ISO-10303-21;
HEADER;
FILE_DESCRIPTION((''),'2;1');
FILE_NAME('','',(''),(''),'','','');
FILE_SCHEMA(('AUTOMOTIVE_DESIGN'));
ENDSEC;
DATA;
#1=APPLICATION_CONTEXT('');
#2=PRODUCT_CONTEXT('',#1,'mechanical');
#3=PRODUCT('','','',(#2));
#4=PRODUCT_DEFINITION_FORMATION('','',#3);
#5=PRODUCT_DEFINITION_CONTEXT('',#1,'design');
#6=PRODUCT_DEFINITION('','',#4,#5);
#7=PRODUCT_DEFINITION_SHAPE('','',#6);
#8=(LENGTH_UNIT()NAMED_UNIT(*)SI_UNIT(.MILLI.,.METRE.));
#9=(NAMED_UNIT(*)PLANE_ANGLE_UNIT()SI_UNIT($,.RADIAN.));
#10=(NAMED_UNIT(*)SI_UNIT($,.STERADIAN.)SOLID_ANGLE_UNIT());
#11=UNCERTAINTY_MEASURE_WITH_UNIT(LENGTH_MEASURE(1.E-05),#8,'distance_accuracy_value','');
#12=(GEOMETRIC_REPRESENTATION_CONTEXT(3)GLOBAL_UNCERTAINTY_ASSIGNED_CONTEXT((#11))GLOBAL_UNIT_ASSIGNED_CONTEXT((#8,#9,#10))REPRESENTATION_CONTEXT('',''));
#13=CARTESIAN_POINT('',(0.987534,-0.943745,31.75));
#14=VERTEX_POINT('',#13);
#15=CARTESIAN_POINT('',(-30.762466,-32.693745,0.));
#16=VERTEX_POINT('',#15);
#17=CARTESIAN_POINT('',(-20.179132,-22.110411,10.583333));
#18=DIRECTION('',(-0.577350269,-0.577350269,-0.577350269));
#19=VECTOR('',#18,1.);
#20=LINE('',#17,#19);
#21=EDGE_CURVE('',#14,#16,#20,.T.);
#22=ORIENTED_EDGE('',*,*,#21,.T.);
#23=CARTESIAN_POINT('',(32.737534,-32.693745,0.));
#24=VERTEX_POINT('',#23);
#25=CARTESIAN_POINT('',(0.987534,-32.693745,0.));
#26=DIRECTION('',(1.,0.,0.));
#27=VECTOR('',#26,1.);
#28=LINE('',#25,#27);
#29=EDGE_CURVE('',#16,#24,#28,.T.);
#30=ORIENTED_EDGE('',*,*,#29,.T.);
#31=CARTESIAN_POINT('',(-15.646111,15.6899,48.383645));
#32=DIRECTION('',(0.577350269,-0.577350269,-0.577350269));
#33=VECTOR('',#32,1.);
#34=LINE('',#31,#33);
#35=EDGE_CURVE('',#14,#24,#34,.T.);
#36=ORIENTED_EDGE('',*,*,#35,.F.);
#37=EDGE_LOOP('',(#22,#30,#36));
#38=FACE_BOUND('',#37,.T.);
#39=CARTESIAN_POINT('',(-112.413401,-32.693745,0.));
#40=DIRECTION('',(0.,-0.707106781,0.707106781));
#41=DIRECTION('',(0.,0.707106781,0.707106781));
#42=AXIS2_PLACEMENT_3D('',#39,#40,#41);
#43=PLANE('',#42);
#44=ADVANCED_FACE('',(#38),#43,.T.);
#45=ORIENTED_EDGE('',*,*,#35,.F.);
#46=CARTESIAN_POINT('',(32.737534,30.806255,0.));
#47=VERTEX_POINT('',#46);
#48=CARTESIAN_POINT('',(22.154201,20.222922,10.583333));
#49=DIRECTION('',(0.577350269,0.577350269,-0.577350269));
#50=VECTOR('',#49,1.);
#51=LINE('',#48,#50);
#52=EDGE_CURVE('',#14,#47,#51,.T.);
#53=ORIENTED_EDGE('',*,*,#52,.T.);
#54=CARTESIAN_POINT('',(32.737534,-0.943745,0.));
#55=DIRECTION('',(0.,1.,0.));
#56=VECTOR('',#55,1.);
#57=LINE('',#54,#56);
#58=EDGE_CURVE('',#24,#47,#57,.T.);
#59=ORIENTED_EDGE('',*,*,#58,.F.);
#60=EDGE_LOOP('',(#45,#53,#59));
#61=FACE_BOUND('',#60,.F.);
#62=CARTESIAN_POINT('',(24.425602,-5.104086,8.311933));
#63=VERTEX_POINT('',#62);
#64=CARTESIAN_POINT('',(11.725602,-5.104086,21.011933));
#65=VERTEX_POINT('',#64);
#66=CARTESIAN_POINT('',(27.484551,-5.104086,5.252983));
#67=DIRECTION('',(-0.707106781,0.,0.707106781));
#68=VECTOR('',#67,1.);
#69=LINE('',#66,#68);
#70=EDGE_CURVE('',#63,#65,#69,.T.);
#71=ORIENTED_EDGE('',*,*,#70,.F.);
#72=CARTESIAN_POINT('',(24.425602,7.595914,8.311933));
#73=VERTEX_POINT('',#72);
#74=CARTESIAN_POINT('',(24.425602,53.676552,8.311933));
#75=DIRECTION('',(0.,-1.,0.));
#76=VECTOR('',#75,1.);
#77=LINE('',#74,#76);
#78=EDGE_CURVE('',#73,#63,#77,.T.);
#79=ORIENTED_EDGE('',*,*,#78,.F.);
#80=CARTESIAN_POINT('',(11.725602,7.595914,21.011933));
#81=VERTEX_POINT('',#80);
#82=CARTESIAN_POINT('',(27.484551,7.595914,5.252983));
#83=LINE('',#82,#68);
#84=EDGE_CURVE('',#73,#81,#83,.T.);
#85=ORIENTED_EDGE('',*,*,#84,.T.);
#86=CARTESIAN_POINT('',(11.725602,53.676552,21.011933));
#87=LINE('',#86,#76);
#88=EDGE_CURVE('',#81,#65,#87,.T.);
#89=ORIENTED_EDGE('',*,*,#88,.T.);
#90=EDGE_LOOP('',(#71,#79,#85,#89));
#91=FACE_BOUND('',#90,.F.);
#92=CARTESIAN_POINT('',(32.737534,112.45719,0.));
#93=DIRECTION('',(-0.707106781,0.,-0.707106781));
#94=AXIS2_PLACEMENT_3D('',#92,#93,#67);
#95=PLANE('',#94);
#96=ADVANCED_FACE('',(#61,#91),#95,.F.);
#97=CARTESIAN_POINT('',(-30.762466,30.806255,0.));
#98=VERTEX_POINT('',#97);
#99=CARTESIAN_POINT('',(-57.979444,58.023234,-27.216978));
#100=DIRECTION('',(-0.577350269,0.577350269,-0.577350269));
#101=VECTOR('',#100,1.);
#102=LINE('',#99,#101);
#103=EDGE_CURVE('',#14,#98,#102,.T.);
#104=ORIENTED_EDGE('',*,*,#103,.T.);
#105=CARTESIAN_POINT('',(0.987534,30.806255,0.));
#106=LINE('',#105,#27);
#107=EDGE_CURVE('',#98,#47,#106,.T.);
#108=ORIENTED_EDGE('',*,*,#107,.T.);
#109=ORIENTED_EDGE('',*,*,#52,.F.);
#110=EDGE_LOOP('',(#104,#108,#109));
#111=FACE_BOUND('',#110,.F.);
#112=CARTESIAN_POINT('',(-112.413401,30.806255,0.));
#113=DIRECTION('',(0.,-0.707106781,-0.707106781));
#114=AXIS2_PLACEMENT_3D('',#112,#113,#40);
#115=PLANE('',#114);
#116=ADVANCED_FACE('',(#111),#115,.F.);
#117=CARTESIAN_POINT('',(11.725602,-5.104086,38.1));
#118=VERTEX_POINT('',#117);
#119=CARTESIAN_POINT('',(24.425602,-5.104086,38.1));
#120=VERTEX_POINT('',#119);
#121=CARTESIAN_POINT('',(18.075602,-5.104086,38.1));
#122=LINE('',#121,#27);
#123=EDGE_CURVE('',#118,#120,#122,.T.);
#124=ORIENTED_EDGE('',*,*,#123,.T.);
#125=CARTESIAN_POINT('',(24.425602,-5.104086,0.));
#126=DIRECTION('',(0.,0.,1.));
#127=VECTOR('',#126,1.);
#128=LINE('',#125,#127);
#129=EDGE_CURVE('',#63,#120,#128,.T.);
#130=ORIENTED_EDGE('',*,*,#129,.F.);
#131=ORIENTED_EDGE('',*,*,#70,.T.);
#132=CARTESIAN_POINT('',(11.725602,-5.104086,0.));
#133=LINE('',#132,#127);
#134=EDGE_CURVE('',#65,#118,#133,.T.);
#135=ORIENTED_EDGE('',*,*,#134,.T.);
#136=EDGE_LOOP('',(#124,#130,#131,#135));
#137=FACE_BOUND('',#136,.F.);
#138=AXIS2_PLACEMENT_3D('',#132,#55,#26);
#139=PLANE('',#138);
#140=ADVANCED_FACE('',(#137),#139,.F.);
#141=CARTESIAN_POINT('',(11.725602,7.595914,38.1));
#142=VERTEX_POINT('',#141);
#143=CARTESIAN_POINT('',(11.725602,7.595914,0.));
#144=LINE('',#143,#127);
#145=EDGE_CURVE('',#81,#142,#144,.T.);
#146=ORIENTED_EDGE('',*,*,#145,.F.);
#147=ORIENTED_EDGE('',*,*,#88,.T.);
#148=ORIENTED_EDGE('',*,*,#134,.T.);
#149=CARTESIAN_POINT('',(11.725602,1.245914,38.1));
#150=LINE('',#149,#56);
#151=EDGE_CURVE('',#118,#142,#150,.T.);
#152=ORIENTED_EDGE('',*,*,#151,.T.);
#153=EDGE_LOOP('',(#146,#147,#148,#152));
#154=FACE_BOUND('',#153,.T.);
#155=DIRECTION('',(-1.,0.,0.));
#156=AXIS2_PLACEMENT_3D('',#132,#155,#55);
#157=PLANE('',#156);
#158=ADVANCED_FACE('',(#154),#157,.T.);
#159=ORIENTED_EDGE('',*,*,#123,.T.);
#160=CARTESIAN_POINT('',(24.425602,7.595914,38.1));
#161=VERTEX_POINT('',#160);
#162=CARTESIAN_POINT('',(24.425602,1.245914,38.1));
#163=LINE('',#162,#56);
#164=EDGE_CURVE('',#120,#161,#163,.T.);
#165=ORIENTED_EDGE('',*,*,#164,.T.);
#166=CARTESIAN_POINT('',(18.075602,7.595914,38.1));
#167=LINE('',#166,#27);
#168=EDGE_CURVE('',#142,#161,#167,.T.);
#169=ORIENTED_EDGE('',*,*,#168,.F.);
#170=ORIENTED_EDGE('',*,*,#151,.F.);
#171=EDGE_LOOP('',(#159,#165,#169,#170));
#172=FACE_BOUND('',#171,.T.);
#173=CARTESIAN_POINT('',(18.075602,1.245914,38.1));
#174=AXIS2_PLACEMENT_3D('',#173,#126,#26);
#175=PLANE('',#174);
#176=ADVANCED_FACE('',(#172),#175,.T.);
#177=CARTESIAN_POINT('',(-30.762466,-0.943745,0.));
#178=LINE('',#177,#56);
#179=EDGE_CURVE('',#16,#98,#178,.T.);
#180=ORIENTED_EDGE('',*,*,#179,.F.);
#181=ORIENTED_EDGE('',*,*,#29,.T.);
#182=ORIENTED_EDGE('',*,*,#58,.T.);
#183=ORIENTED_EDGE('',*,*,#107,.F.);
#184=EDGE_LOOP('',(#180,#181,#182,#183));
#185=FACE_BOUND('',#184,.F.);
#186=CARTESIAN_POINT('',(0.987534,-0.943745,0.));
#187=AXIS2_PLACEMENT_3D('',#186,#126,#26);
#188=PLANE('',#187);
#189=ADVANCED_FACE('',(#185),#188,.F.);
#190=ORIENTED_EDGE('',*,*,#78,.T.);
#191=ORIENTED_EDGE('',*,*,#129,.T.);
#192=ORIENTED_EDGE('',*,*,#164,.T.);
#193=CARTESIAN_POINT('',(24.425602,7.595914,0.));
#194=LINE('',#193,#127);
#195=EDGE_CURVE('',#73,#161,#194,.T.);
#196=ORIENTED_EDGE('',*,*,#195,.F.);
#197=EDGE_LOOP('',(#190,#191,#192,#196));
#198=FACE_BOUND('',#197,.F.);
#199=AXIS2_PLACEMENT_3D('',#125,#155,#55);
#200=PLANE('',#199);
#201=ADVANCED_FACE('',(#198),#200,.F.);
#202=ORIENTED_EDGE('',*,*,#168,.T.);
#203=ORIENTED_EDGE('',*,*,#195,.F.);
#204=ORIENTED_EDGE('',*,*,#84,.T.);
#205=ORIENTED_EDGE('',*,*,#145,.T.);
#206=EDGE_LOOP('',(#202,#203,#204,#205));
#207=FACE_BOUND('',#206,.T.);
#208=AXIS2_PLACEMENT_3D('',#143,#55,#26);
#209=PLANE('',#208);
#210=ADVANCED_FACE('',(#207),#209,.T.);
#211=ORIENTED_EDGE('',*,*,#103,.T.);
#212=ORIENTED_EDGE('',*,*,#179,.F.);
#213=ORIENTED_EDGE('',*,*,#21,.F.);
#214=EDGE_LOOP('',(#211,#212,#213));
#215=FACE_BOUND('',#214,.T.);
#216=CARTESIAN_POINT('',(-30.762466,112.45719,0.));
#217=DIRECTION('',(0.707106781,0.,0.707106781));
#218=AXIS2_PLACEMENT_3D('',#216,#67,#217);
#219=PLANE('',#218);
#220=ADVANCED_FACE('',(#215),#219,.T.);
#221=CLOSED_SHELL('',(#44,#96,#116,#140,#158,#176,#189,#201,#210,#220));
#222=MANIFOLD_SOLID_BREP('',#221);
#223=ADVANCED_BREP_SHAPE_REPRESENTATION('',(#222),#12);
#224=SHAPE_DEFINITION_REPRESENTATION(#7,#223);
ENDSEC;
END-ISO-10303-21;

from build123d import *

# Parameters (mm, degrees)
F0_W        = 63.5
F0_H        = 63.5
F0_W_2      = 12.7
F0_H_2      = 12.7
F1_DEPTH    = 31.75
F2_T1_DEPTH = 226.8018697358
F2_T3_DEPTH = 226.8018697358
F3_DEPTH    = 38.1


# Not quite as in the source:
# - a fillet or chamfer that OpenCascade refuses, or shapes differently, is made with other operations: its cross-section is extruded or revolved along the edge and cut away or added


with BuildPart() as f1:
    # F0 (on Top) → F1 (new body)
    with BuildSketch(Plane.XY):
        with Locations((0.9875343293, -0.9437446371)):
            Rectangle(F0_W, F0_H)
        with Locations((18.0756017402, 1.2459141038)):
            Rectangle(F0_W_2, F0_H_2, mode=Mode.SUBTRACT)
    extrude(amount=F1_DEPTH)

    # F2: chamfer of 31.75 on 4 edges, made by hand

    # F2_s2 → F2_t1 (cut)
    with BuildSketch(Plane.YZ.offset(-112.4134005386)):
        Polygon((-32.6937446371, 0), (-0.9437446371, 31.75), (-32.6937446371, 31.75), align=None)
        Polygon((30.8062553629, 0), (-0.9437446371, 31.75), (30.8062553629, 31.75), align=None)
    extrude(amount=F2_T1_DEPTH, mode=Mode.SUBTRACT)

    # F2_s4 → F2_t3 (cut)
    with BuildSketch(Plane.XZ.offset(-112.4571902308)):
        Polygon((32.7375343293, 0), (0.9875343293, 31.75), (32.7375343293, 31.75), align=None)
        Polygon((-30.7624656707, 0), (0.9875343293, 31.75), (-30.7624656707, 31.75), align=None)
    extrude(amount=F2_T3_DEPTH, mode=Mode.SUBTRACT)

    # F0 (on Top) → F3 (join)
    with BuildSketch(Plane.XY):
        with Locations((18.0756017402, 1.2459141038)):
            Rectangle(F0_W_2, F0_H_2)
    extrude(amount=F3_DEPTH)


solid = f1.part
